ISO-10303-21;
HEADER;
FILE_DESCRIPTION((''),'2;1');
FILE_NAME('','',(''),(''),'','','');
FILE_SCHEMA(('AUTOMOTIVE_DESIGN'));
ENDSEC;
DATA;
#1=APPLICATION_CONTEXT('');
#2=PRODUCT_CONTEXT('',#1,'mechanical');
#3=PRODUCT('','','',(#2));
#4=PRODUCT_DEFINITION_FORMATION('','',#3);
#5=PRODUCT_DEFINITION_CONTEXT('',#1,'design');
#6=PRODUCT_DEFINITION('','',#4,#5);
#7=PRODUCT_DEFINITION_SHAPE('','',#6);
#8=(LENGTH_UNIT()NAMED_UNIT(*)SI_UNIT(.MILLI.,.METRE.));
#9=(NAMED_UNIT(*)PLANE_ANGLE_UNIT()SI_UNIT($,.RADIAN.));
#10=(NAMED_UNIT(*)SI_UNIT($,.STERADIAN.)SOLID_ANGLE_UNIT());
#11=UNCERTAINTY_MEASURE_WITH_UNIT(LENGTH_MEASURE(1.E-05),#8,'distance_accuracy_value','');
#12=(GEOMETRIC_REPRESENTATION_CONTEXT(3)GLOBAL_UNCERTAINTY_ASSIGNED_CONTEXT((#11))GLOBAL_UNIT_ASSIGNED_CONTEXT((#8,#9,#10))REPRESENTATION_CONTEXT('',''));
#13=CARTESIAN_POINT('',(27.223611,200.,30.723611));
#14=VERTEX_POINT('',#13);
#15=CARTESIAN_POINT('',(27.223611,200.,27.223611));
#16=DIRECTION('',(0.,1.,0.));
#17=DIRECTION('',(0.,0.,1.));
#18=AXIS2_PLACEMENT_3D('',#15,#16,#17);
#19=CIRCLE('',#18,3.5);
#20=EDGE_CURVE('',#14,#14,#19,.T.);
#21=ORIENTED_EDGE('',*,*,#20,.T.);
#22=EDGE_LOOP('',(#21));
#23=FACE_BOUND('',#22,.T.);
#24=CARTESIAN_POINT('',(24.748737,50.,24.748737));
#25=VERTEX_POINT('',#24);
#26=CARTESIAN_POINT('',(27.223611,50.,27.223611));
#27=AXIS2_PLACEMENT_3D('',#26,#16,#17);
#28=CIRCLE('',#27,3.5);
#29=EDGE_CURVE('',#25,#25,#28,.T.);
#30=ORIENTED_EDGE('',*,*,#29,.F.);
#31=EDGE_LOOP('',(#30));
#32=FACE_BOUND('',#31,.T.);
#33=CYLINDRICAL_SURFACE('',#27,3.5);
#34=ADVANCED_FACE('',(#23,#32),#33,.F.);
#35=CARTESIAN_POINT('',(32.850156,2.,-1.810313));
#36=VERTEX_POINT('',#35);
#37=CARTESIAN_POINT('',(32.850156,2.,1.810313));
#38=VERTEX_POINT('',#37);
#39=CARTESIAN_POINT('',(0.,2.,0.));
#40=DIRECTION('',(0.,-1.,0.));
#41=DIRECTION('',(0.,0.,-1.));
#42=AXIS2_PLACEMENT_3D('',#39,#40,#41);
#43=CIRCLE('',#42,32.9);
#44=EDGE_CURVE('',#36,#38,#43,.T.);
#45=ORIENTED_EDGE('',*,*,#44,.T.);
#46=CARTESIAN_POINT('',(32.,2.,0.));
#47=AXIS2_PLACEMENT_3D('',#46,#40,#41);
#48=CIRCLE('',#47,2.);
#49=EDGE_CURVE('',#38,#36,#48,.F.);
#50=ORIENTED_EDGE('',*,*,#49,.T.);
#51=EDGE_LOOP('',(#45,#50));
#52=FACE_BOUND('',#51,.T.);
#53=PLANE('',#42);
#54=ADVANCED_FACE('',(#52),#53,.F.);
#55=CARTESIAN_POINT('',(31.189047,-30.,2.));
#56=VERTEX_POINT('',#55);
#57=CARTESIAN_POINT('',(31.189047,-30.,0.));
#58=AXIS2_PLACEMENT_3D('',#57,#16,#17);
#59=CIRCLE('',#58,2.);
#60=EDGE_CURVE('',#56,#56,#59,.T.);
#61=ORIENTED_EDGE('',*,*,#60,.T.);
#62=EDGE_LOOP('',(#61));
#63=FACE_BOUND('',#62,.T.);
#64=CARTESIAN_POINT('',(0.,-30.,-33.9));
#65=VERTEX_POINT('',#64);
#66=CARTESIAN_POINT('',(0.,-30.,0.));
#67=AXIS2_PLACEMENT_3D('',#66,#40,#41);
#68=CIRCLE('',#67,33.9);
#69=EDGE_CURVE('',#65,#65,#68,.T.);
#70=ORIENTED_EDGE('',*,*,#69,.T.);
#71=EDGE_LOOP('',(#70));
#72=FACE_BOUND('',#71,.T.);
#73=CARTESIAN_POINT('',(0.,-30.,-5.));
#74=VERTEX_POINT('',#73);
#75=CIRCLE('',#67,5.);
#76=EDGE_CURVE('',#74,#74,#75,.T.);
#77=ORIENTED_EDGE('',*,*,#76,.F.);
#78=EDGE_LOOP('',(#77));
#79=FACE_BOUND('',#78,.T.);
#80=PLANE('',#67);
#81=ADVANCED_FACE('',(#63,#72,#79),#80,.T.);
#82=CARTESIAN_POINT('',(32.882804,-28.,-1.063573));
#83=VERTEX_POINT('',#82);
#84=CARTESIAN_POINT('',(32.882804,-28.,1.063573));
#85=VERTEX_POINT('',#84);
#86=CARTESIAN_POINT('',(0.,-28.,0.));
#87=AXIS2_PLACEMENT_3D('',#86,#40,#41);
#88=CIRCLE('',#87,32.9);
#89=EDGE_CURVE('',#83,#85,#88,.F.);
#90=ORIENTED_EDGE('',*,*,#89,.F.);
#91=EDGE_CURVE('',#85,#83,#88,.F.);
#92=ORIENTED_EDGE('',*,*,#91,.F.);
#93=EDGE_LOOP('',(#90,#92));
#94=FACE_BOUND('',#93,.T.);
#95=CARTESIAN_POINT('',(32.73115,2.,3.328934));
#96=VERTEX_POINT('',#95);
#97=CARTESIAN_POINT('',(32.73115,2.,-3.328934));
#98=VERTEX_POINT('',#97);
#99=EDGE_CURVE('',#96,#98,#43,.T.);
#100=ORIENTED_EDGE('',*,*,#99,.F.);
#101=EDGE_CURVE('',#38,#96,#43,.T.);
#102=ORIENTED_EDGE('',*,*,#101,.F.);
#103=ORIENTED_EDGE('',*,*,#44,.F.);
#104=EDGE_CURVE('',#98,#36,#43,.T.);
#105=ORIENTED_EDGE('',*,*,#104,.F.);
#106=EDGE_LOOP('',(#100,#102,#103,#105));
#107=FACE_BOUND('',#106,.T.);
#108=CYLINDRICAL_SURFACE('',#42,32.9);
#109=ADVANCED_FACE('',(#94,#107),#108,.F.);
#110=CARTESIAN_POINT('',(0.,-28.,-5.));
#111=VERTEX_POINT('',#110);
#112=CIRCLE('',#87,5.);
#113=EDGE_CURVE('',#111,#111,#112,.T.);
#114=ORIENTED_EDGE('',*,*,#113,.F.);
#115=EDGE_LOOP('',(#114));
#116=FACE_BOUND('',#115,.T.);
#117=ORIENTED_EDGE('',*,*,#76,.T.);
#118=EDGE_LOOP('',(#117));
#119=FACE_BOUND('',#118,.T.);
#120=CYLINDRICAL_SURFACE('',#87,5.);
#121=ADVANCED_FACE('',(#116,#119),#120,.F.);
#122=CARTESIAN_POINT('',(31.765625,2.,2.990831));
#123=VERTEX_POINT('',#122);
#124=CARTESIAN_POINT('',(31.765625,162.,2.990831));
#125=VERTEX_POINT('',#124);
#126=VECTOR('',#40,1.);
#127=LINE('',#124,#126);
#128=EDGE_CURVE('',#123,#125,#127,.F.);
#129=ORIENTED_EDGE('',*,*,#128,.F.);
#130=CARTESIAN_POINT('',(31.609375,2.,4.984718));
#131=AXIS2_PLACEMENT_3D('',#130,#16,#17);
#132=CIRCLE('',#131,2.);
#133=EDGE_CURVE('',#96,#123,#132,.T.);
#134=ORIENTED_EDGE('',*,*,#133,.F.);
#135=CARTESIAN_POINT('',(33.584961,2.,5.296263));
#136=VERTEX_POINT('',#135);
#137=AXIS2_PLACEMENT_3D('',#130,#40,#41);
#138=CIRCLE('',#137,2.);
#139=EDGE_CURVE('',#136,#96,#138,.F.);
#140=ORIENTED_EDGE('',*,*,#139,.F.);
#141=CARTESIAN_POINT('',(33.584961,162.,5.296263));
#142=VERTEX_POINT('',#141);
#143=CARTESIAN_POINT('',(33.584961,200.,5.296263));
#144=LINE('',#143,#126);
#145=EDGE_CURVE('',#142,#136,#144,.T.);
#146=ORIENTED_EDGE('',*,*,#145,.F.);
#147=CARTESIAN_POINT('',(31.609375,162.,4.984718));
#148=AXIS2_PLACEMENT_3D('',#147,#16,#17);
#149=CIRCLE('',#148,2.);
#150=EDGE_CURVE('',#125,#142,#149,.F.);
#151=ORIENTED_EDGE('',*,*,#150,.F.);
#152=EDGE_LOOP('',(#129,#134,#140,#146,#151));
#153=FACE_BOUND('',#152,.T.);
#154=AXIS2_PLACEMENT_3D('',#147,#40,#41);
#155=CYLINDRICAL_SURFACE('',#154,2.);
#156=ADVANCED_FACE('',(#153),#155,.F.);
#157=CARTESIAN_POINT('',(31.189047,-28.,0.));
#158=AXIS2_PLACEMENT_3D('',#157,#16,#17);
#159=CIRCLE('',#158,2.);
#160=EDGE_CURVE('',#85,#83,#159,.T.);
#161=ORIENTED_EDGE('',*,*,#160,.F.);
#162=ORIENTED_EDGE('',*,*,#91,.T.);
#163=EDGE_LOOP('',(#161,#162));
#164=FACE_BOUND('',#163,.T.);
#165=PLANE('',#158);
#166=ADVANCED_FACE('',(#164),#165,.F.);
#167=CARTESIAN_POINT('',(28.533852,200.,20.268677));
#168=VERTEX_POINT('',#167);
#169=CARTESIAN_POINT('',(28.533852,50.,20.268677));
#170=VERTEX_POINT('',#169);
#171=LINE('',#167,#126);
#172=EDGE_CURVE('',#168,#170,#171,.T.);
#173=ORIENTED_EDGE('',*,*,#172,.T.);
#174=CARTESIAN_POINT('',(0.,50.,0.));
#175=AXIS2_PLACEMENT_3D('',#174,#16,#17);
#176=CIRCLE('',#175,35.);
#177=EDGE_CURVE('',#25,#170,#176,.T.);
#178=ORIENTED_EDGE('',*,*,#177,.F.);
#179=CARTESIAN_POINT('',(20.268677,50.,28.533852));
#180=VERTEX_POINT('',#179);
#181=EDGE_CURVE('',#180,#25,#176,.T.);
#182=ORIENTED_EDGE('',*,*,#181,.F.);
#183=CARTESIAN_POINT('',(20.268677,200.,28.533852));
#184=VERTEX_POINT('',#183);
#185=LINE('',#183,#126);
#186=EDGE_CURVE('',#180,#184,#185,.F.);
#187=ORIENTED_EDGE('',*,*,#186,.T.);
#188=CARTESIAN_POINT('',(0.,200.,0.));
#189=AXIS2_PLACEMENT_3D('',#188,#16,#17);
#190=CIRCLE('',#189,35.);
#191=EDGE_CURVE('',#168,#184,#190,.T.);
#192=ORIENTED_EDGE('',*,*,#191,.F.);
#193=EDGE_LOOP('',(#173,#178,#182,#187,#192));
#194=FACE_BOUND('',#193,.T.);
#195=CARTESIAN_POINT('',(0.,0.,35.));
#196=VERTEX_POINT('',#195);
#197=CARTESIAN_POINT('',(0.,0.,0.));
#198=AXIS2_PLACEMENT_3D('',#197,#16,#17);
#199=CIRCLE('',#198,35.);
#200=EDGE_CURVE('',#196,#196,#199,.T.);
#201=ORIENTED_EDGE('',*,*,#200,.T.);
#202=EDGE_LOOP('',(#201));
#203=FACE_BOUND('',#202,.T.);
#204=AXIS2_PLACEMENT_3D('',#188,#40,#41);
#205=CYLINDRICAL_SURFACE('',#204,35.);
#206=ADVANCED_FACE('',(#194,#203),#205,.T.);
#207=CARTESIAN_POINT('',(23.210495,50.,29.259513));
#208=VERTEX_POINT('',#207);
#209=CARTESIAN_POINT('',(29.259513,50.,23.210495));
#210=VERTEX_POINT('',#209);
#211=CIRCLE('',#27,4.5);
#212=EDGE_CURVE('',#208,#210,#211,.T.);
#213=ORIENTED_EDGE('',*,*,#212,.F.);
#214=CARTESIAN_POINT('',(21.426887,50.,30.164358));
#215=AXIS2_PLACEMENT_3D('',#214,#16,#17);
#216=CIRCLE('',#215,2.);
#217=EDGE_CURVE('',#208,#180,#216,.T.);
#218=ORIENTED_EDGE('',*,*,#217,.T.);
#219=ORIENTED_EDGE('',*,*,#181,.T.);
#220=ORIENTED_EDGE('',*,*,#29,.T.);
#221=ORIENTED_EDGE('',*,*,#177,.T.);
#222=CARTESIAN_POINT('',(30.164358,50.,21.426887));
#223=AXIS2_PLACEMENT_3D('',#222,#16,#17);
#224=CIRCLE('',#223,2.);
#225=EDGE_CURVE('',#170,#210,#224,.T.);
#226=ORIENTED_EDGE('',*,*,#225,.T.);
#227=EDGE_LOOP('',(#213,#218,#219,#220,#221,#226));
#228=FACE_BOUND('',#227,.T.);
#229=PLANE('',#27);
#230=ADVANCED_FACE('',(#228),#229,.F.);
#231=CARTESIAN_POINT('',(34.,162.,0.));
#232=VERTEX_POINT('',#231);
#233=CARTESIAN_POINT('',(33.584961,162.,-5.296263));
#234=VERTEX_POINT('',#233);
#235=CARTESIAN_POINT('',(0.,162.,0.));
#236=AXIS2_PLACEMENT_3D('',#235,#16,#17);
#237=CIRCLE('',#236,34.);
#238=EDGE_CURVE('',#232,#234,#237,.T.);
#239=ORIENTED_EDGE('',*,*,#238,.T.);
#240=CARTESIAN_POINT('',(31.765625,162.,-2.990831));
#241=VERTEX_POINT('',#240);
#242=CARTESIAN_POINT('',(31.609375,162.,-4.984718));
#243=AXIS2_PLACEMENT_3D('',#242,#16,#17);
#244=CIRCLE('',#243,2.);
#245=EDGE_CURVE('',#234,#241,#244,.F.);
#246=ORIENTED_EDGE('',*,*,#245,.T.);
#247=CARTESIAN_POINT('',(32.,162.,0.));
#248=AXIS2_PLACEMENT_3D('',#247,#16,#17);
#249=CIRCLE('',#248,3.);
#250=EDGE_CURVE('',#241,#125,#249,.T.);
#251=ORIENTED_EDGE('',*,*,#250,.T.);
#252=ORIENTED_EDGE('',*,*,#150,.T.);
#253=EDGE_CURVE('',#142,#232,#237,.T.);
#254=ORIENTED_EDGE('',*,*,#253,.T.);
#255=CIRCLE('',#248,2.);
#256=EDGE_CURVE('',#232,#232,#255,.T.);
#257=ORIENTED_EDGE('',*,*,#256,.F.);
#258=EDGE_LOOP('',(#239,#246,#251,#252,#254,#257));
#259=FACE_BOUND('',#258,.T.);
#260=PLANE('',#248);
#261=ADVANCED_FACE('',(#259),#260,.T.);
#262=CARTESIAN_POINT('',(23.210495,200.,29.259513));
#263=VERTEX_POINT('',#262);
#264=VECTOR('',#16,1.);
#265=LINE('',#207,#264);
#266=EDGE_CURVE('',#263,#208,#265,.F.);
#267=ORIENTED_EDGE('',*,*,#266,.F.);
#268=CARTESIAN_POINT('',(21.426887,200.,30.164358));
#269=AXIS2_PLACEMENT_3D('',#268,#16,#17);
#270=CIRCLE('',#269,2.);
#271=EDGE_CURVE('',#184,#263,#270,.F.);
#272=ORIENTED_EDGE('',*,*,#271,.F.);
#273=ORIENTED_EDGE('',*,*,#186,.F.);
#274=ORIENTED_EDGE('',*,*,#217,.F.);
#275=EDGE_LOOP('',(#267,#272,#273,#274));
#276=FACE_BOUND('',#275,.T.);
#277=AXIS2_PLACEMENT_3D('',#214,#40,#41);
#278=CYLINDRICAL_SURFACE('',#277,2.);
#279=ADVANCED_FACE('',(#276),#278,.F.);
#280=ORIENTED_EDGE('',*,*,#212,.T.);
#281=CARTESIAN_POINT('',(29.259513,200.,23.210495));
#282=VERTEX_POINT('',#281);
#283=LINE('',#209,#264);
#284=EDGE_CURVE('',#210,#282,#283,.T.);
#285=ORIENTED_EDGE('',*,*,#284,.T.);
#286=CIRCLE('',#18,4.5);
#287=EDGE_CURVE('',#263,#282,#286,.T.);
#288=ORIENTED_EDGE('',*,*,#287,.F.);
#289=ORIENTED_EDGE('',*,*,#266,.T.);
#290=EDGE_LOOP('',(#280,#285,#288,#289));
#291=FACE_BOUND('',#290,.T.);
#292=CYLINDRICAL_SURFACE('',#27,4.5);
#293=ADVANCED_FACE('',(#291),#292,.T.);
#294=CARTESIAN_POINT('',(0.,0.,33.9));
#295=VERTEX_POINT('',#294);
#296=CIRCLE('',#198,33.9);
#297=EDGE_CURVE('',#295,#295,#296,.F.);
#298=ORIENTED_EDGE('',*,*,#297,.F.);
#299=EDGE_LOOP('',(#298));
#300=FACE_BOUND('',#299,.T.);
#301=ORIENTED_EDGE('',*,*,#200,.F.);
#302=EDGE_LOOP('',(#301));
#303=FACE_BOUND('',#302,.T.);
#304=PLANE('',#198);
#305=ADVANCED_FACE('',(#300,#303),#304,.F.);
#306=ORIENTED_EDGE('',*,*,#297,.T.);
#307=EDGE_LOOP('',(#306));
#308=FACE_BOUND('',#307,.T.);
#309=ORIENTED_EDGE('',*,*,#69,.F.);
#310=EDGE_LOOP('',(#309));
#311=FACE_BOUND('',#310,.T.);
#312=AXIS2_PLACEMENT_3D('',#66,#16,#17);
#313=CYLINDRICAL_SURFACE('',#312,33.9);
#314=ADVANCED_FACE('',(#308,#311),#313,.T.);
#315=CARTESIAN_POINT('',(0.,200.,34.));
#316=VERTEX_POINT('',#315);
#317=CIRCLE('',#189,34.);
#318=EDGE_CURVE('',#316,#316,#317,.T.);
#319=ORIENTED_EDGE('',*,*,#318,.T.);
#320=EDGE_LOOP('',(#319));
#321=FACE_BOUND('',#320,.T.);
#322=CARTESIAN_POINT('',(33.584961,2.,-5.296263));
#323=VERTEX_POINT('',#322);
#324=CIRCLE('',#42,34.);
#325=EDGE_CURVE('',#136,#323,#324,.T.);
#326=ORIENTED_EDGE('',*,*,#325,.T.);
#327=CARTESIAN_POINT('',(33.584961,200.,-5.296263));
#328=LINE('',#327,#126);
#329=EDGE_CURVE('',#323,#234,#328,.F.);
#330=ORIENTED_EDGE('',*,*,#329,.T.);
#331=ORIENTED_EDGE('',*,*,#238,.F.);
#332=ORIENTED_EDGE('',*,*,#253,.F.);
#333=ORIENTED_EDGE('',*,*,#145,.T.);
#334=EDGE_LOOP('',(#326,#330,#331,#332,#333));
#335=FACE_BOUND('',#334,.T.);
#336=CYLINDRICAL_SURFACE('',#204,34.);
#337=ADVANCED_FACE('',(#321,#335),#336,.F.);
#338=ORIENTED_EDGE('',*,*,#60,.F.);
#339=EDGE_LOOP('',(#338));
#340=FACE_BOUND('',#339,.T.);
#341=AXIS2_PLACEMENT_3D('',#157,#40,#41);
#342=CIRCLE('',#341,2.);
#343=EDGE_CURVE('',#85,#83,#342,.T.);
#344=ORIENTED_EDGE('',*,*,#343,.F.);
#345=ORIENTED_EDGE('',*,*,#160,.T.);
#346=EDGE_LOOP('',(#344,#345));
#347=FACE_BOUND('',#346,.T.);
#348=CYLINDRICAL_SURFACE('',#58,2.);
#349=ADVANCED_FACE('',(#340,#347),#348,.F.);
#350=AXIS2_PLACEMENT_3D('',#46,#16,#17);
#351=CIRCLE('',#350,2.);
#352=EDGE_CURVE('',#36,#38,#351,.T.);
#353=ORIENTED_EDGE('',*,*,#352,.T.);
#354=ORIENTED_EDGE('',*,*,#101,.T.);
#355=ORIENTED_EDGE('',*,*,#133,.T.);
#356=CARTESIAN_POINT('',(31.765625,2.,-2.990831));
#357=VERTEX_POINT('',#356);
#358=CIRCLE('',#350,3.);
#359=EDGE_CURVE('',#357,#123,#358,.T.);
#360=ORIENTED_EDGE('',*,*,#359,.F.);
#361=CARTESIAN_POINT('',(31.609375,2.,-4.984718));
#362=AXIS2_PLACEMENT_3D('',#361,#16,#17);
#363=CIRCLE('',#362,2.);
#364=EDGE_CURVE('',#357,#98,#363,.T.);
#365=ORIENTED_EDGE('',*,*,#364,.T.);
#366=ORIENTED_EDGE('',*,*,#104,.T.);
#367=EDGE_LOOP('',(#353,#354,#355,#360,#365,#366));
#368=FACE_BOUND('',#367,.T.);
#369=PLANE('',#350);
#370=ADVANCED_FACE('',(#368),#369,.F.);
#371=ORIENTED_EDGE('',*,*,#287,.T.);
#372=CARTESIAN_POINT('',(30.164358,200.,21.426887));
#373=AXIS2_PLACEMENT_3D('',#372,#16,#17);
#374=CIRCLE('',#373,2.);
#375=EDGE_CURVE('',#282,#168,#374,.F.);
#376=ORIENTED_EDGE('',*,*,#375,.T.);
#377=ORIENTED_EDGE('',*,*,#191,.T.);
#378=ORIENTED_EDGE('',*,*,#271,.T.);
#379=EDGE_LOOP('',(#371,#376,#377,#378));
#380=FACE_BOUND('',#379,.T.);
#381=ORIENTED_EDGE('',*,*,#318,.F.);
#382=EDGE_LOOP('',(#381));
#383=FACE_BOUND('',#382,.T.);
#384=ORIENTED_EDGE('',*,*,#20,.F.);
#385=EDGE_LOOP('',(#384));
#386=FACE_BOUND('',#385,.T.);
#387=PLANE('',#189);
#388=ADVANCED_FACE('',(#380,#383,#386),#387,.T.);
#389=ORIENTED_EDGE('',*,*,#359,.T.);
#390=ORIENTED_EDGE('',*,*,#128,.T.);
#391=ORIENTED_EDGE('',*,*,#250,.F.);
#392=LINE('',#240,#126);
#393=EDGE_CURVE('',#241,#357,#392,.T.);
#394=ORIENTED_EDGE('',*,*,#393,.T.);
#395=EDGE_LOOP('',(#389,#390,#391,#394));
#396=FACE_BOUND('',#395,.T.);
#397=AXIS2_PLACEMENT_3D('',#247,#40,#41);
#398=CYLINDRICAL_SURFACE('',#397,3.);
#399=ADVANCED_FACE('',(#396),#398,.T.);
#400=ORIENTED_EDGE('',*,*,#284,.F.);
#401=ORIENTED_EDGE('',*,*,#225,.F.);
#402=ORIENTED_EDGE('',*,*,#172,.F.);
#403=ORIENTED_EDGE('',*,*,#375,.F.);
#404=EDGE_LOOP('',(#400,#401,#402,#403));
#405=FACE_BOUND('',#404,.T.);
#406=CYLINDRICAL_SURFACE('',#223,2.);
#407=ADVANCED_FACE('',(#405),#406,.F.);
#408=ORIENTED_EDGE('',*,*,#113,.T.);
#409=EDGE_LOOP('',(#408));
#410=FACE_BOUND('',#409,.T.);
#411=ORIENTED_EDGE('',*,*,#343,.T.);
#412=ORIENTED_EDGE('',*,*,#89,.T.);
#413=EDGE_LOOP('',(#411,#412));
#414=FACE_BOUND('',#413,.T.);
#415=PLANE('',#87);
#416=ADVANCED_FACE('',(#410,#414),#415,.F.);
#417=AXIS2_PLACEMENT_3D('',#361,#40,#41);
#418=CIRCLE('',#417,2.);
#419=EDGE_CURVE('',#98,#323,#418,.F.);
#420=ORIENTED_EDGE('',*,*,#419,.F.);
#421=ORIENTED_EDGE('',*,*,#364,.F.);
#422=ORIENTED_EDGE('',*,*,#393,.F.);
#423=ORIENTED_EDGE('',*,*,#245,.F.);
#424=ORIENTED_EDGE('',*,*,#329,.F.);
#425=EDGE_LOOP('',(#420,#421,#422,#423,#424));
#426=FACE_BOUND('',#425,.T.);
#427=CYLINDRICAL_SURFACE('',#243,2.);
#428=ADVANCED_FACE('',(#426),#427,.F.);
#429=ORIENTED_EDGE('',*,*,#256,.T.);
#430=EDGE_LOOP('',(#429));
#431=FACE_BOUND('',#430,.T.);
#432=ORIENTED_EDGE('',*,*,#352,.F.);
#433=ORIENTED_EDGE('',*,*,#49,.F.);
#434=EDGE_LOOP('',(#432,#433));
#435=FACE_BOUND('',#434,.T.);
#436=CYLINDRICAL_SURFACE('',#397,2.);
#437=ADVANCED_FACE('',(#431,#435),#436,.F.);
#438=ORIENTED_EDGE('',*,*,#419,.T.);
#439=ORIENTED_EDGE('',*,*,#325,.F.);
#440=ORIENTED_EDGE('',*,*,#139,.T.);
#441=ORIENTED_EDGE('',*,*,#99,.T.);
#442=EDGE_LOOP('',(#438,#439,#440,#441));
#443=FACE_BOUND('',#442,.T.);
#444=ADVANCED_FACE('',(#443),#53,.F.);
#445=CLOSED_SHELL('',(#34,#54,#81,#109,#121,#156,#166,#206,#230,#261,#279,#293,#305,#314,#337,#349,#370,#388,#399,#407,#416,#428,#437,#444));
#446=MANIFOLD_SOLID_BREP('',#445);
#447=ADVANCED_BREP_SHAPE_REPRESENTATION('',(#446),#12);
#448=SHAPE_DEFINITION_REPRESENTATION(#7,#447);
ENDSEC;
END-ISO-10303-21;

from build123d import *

# Parameters (mm, degrees)
SKETCH1_R           = 35
SKETCH1_R_2         = 34
BOSS_EXTRUDE1_DEPTH = 200
SKETCH2_R           = 34
SKETCH2_R_2         = 32.9
BOSS_EXTRUDE2_DEPTH = 2
BOSS_EXTRUDE3_START = 30
SKETCH3_R           = 33.9
SKETCH3_R_2         = 32.9
BOSS_EXTRUDE3_DEPTH = 30
SKETCH4_R           = 33.9
BOSS_EXTRUDE4_DEPTH = 2
SKETCH5_R           = 5
CUT_EXTRUDE1_DEPTH  = 2
SKETCH7_R           = 3
SKETCH7_R_2         = 2
BOSS_EXTRUDE8_DEPTH = 160
FILLET2_R           = 2
SKETCH8_R           = 2
CUT_EXTRUDE2_DEPTH  = 2
SKETCH9_R           = 4.5
SKETCH9_R_2         = 3.5
BOSS_EXTRUDE9_DEPTH = 150
FILLET3_R           = 2


with BuildPart() as part:
    # Sketch1 → Boss-Extrude1 (new body)
    with BuildSketch(Plane(origin=(0, 0, 0), x_dir=(1, 0, 0), z_dir=(0, 1, 0))):
        with Locations(Location((0, 0, 0), (0, 0, 270))):
            Circle(SKETCH1_R)
        with Locations(Location((0, 0, 0), (0, 0, 270))):
            Circle(SKETCH1_R_2, mode=Mode.SUBTRACT)
    extrude(amount=BOSS_EXTRUDE1_DEPTH)

    # Sketch2 → Boss-Extrude2 (add)
    with BuildSketch(Plane.XZ):
        with Locations(Location((0, 0, 0), (0, 0, 270))):
            Circle(SKETCH2_R)
        with Locations(Location((0, 0, 0), (0, 0, 270))):
            Circle(SKETCH2_R_2, mode=Mode.SUBTRACT)
    extrude(amount=-BOSS_EXTRUDE2_DEPTH)

    # Sketch3 → Boss-Extrude3 (add)
    with BuildSketch(Plane.XZ.offset(BOSS_EXTRUDE3_START)):
        with Locations(Location((0, 0, 0), (0, 0, 90))):
            Circle(SKETCH3_R)
        with Locations(Location((0, 0, 0), (0, 0, 270))):
            Circle(SKETCH3_R_2, mode=Mode.SUBTRACT)
    extrude(amount=-BOSS_EXTRUDE3_DEPTH)

    # Sketch4 → Boss-Extrude4 (add)
    with BuildSketch(Plane.XZ.offset(30)):
        with Locations(Location((0, 0, 0), (0, 0, 90))):
            Circle(SKETCH4_R)
    extrude(amount=-BOSS_EXTRUDE4_DEPTH)

    # Sketch5 → Cut-Extrude1 (cut)
    with BuildSketch(Plane.XZ.offset(30)):
        with Locations(Location((0, 0, 0), (0, 0, 270))):
            Circle(SKETCH5_R)
    extrude(amount=-CUT_EXTRUDE1_DEPTH, mode=Mode.SUBTRACT)

    # Sketch7 → Boss-Extrude8 (add)
    with BuildSketch(Plane(origin=(0, 2, 0), x_dir=(1, 0, 0), z_dir=(0, 1, 0))):
        with Locations((32, 0)):
            Circle(SKETCH7_R)
        with Locations(Location((32, 0, 0), (0, 0, 64.84439143))):
            Circle(SKETCH7_R_2, mode=Mode.SUBTRACT)
    extrude(amount=BOSS_EXTRUDE8_DEPTH)

    # Fillet2
    # the kernel refuses this fillet: 2 mm, written as the material it adds along each edge
    with BuildSketch(Plane(origin=(33.921875, 162, 2.303561695), x_dir=(-0.11187189352087389, 0, 0.9937226370773962), z_dir=(0, -1, 0))) as fillet2_piece_1:
        with BuildLine():
            CenterArc((2.923029325, 1.998037582), FILLET2_R, 178.057565486, 94.480798786)
            ThreePointArc((0.924178552, 2.06582835), (0.66436101, 0.942424954), (0, 0))
            ThreePointArc((0, 0), (1.505802985, -0.033361112), (3.011605971, 0))
        make_face()
    extrude(amount=160)
    with BuildSketch(Plane(origin=(33.921875, 162, -2.303561695), x_dir=(-0.11187189352087391, 0, -0.993722637077396), z_dir=(0, -1, 0))) as fillet2_piece_2:
        with BuildLine():
            CenterArc((2.923029325, -1.998037582), FILLET2_R, 87.461635728, 94.480798786)
            ThreePointArc((0.924178552, -2.06582835), (0.66436101, -0.942424954), (0, 0))
            ThreePointArc((0, 0), (1.505802985, 0.033361112), (3.011605971, 0))
        make_face()
    extrude(amount=160)

    # Sketch8 → Cut-Extrude2 (cut)
    with BuildSketch(Plane(origin=(0, -28, 0), x_dir=(1, 0, 0), z_dir=(0, 1, 0))):
        with Locations(Location((31.18904707, 0, 0), (0, 0, 270))):
            Circle(SKETCH8_R)
    extrude(amount=-CUT_EXTRUDE2_DEPTH, mode=Mode.SUBTRACT)

    # Sketch9 → Boss-Extrude9 (add)
    with BuildSketch(Plane(origin=(0, 200, 0), x_dir=(1, 0, 0), z_dir=(0, 1, 0))):
        with Locations((27.223611076, -27.223611076)):
            Circle(SKETCH9_R)
        with Locations(Location((27.223611076, -27.223611076, 0), (0, 0, 270))):
            Circle(SKETCH9_R_2, mode=Mode.SUBTRACT)
    extrude(amount=-BOSS_EXTRUDE9_DEPTH)

    # Fillet3
    fillet3_edges = [part.edges().sort_by_distance(p)[0] for p in [
        (26.580781197, 125, 22.769762207),
        (22.769762207, 125, 26.580781197),
    ]]
    fillet(fillet3_edges, radius=FILLET3_R)


solid = part.part
